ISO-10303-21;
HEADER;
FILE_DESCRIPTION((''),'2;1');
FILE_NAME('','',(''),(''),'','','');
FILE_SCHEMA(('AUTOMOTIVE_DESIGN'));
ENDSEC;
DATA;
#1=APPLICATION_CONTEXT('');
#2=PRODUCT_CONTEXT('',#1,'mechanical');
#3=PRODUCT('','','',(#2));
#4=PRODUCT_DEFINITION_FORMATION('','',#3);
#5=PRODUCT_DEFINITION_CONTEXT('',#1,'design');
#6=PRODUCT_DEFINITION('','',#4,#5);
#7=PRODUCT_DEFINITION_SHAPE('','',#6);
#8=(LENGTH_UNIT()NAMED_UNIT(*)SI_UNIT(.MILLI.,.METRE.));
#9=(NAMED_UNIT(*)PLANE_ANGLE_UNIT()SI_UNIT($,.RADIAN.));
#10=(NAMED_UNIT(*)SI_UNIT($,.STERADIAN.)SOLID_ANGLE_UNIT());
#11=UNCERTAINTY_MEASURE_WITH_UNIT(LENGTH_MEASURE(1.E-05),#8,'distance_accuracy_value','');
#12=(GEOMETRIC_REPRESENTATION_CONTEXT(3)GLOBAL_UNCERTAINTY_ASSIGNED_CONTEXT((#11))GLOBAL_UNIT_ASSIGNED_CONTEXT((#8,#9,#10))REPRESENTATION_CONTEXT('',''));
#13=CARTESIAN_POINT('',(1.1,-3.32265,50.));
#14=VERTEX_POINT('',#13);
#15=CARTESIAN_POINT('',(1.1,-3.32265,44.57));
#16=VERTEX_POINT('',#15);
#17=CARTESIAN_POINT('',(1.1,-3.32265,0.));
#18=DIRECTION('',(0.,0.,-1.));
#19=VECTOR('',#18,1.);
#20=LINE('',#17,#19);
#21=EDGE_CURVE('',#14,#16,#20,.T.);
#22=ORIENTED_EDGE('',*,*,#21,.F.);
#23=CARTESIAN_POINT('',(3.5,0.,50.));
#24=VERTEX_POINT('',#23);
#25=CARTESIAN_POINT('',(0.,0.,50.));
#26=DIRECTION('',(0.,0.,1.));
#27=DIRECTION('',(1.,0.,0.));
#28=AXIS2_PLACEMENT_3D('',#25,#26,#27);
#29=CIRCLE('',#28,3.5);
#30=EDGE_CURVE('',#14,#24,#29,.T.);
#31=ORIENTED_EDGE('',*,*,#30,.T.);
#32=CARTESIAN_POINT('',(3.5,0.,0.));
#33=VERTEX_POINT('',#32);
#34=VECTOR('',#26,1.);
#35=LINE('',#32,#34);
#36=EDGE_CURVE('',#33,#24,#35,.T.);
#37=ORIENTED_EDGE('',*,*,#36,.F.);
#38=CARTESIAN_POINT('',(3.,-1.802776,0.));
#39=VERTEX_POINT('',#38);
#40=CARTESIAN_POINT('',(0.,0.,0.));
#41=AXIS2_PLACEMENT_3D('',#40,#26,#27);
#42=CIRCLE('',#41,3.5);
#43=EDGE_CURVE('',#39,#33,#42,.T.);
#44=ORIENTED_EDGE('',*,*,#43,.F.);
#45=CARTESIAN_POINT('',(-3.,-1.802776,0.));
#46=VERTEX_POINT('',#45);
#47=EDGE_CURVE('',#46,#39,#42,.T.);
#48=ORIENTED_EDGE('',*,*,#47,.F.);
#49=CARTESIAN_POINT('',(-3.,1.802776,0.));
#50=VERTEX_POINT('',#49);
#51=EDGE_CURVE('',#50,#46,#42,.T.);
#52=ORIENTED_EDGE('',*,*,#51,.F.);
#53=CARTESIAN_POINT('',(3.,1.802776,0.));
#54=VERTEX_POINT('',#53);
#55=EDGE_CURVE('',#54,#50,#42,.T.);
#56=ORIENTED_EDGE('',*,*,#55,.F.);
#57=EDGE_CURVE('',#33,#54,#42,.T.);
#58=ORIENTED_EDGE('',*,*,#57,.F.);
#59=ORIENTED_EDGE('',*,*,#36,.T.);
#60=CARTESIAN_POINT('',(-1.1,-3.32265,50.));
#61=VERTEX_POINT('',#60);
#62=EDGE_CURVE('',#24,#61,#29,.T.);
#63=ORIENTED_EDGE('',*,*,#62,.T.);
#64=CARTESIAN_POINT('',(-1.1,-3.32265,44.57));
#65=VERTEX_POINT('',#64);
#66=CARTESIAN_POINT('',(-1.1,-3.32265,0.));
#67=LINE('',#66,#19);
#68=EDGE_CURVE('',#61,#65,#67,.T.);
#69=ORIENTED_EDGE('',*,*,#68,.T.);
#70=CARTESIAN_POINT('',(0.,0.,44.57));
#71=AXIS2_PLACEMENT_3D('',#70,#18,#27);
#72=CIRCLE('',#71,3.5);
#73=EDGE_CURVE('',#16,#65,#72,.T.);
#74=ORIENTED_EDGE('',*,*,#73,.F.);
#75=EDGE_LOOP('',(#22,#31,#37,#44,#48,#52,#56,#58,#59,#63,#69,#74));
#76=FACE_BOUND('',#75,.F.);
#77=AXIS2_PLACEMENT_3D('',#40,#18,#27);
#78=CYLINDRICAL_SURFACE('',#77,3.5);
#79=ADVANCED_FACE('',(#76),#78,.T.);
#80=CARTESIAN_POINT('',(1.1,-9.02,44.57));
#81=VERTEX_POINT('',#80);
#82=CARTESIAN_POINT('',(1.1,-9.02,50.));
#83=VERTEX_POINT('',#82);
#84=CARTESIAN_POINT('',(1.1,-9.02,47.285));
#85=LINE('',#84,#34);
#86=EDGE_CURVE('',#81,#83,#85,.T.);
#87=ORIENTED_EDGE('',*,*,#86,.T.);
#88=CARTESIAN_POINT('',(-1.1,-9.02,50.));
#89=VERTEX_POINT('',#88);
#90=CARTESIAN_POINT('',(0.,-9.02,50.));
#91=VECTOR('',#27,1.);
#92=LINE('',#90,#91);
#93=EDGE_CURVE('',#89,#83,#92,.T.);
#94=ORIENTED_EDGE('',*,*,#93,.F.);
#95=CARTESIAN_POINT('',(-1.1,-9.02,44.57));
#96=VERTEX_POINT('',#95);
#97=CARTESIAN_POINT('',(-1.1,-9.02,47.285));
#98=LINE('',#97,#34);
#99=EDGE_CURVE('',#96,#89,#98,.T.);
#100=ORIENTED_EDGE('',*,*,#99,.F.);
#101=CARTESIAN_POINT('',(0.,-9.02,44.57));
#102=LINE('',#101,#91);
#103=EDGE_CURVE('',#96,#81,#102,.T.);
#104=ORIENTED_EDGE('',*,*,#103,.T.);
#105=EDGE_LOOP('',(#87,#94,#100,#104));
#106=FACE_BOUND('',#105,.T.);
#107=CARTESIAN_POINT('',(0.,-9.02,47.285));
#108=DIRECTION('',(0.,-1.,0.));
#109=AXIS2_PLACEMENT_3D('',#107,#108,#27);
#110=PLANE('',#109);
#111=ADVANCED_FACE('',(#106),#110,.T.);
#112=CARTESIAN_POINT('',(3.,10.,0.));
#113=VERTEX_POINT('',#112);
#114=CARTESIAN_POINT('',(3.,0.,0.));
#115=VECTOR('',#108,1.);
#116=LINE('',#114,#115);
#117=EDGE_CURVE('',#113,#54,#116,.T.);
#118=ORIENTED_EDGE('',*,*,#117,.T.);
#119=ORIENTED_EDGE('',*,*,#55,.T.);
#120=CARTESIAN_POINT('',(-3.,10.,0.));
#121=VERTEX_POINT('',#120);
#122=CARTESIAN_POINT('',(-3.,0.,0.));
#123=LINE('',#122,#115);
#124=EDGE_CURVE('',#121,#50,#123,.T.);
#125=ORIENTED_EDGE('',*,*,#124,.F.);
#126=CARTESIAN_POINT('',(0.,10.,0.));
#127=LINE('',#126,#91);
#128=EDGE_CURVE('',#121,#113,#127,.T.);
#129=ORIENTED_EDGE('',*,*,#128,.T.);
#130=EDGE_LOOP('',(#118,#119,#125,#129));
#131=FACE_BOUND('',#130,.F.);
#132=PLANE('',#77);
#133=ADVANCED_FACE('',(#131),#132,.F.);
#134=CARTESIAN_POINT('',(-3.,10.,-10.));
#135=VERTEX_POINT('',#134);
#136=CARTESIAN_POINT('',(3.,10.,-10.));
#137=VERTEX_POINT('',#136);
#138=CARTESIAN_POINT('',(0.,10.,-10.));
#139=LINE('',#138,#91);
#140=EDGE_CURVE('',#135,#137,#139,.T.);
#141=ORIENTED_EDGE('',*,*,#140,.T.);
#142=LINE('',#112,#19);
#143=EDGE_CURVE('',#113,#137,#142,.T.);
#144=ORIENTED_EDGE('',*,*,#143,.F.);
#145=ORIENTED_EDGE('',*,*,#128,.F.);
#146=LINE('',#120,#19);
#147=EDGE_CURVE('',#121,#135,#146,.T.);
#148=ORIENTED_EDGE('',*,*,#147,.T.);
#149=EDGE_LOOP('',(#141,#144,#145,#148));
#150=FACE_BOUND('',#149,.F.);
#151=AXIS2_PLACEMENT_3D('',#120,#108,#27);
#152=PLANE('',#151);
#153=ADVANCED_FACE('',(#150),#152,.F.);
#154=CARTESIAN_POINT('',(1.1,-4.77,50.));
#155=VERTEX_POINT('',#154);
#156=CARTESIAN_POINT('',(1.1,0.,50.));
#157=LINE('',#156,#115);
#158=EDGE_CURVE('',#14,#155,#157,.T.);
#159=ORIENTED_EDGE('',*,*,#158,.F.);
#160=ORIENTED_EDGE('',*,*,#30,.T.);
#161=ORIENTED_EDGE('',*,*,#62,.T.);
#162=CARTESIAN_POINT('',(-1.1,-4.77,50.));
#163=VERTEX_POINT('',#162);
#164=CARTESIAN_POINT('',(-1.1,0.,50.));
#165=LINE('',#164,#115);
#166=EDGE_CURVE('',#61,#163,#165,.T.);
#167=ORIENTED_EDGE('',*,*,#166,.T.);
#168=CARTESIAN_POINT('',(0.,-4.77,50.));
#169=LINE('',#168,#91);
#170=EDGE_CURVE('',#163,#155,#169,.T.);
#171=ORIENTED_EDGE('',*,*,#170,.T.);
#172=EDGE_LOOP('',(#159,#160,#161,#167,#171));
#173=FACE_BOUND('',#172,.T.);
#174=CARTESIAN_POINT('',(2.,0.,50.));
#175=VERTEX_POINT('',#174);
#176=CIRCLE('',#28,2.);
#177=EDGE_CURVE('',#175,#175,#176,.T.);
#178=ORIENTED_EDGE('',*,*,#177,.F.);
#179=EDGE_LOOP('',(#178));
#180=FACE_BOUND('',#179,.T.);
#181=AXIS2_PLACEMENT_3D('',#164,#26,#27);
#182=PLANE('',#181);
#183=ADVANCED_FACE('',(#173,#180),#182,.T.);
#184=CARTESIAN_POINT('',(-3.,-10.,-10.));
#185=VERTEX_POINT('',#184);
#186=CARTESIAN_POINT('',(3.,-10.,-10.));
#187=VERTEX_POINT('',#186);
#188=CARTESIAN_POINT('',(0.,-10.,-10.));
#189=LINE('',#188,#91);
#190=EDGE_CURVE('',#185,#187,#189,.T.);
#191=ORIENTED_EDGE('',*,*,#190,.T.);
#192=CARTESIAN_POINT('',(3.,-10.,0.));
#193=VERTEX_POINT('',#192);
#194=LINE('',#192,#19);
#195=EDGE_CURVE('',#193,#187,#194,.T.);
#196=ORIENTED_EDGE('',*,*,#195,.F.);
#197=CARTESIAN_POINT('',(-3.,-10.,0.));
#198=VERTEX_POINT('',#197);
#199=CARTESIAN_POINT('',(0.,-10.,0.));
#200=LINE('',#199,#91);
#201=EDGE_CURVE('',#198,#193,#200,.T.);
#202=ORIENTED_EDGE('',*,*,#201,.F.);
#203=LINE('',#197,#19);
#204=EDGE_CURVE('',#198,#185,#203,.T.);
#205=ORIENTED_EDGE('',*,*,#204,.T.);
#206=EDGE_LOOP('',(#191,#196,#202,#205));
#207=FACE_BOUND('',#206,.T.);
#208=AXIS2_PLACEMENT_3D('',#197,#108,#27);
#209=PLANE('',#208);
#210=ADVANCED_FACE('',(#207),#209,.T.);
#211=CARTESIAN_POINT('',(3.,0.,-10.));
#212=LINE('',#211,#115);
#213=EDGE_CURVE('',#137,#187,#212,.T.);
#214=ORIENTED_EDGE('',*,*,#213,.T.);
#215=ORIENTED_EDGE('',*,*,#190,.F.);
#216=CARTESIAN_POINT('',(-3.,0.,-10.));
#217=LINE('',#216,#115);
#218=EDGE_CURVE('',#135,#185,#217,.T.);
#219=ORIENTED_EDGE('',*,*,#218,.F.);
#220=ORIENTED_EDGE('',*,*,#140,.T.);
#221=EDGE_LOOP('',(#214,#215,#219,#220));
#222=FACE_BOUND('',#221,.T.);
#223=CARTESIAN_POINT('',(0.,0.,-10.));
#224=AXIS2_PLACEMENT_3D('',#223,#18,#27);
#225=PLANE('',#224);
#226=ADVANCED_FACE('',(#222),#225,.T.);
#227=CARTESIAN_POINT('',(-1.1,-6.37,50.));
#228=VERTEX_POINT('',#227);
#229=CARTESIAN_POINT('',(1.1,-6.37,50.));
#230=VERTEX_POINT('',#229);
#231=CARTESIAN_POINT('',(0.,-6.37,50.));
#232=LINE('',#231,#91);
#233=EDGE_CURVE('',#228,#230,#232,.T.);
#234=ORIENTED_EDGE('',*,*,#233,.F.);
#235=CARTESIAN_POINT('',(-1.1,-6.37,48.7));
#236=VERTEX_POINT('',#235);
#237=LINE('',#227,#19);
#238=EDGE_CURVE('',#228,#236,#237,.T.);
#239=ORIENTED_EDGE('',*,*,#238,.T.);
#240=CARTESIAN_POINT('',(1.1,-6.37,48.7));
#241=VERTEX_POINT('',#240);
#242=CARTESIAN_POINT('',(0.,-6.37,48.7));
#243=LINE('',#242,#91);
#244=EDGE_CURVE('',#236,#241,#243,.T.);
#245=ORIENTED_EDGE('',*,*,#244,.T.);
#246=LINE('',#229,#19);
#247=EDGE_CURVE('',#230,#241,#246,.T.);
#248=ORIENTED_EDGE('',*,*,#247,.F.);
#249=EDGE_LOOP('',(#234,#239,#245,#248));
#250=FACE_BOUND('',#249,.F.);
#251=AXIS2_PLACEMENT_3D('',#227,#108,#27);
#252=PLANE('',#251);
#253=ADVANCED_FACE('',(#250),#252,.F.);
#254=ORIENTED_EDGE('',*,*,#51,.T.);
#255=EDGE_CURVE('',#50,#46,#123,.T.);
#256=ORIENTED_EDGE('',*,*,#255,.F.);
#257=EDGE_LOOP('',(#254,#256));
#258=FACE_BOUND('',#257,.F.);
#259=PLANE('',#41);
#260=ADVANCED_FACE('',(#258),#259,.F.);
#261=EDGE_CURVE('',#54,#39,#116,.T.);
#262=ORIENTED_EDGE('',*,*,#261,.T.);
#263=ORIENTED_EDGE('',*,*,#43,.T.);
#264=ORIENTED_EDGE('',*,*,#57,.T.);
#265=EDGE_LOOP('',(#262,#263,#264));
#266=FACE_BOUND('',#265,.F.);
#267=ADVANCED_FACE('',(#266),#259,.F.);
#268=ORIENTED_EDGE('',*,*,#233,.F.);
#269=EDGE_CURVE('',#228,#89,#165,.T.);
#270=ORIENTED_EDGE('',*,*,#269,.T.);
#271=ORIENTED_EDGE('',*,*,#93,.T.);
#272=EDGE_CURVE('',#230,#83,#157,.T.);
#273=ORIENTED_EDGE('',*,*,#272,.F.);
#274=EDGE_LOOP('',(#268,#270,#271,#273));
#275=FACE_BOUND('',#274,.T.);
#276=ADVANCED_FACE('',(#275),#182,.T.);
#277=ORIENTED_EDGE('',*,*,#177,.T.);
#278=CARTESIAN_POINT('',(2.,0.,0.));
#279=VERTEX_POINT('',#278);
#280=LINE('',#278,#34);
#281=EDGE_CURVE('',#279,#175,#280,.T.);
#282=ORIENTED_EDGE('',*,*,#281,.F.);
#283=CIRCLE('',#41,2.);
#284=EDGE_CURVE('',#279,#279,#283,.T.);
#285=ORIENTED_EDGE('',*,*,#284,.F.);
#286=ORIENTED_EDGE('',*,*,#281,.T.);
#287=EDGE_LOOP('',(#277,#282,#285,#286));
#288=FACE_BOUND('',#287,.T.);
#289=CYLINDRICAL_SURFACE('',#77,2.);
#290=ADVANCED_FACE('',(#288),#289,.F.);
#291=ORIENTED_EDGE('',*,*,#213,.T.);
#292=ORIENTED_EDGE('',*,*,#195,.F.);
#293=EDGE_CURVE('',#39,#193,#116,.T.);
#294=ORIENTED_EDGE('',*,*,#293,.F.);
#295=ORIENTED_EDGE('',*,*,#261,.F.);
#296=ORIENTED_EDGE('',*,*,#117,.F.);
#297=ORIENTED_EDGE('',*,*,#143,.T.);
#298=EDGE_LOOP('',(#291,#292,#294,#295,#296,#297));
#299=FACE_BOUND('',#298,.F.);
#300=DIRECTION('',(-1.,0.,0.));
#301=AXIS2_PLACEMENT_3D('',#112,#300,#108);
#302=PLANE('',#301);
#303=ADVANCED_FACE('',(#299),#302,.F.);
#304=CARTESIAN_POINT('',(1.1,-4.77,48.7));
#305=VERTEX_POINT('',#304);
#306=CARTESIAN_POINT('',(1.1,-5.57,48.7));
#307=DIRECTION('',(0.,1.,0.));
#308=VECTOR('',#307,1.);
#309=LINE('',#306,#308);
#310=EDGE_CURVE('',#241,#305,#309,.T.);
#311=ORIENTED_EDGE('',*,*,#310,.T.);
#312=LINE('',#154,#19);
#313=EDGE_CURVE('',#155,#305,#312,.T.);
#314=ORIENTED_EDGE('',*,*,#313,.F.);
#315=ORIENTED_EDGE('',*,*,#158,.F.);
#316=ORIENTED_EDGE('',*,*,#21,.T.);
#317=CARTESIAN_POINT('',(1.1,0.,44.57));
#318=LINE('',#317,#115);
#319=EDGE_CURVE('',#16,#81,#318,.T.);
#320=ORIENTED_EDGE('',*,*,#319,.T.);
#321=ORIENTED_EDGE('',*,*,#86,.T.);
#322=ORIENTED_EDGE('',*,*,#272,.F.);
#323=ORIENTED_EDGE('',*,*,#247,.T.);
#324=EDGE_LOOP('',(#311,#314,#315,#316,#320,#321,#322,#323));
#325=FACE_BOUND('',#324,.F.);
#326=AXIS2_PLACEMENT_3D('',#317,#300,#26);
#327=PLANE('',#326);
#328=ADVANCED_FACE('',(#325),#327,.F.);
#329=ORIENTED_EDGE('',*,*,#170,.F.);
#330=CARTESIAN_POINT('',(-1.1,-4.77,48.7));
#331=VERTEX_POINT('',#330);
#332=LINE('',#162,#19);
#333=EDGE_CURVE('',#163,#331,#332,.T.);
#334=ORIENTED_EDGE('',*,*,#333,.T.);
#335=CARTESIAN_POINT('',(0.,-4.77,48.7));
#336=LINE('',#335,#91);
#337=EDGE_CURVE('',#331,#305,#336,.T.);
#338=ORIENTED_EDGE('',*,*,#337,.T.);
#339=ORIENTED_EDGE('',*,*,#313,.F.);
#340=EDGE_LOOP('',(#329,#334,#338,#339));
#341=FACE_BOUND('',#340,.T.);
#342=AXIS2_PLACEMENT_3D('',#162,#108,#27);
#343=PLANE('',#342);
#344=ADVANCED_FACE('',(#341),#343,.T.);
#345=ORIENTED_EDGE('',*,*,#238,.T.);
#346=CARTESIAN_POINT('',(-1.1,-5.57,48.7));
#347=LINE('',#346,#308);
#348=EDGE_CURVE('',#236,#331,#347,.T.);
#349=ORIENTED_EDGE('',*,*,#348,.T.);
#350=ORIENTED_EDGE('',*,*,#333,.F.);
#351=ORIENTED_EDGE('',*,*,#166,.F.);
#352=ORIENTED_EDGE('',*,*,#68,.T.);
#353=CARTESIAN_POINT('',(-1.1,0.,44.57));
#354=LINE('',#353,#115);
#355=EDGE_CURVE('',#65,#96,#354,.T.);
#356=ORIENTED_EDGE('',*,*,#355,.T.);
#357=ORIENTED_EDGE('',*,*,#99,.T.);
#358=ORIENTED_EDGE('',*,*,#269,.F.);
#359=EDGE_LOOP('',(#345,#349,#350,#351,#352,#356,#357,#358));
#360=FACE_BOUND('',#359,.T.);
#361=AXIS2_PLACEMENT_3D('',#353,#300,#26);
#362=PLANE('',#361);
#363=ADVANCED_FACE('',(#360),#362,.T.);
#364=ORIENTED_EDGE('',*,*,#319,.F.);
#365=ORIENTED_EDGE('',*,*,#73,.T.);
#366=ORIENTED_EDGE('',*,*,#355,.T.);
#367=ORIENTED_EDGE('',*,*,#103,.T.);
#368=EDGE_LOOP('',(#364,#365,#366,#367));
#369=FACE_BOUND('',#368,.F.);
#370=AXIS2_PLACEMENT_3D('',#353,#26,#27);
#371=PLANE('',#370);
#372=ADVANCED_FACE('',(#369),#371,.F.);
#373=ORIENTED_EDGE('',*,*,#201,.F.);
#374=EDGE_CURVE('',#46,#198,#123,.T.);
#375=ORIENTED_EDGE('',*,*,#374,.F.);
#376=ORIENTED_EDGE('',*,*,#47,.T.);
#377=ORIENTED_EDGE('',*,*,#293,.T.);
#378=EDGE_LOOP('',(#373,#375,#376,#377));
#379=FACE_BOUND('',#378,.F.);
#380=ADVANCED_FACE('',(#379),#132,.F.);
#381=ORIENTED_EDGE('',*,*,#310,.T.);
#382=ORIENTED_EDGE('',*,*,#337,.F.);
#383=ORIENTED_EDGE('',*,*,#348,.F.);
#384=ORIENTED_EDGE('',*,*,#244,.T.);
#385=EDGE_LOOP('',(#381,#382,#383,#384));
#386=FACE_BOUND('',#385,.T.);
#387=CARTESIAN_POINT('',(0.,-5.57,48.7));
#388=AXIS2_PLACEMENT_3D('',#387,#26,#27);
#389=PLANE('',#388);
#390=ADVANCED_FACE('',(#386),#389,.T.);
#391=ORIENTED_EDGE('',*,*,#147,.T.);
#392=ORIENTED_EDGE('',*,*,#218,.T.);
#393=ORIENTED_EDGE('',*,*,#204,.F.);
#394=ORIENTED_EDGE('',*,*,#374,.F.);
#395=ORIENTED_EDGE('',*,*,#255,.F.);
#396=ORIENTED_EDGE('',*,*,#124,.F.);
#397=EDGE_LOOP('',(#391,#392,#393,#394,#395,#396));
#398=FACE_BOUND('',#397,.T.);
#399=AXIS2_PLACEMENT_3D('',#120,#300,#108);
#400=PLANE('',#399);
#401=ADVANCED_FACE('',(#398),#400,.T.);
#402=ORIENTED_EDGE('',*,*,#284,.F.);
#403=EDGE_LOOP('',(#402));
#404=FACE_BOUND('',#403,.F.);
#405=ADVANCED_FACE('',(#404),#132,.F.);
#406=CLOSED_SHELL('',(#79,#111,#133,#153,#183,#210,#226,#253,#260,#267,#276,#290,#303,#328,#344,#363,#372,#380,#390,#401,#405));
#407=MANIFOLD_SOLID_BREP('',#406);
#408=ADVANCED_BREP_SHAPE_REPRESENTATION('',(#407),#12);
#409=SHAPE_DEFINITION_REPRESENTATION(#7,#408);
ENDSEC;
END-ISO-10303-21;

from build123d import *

# Parameters (mm, degrees)
F0_R          = 3.5
F0_R_2        = 2
F1_DEPTH      = 50
F2_W          = 2.2
F2_H          = 5.43
F3_DEPTH      = 9.02
F4_END_RADIUS = 2
F4_REACH      = 14.8797455995
F5_W          = 2.2
F5_H          = 1.6
F6_DEPTH      = 1.3
F7_W          = 6
F7_H          = 20
F8_DEPTH      = 10


with BuildPart() as f1:
    # F0 (on Top) → F1 (new body)
    with BuildSketch(Plane.XY):
        Circle(F0_R)
        Circle(F0_R_2, mode=Mode.SUBTRACT)
    extrude(amount=F1_DEPTH)

    # F2 (on Front) → F3 (join)
    with BuildSketch(Plane.XZ):
        with Locations((0, 47.285)):
            Rectangle(F2_W, F2_H)
    extrude(amount=F3_DEPTH)

    f4_end = (Plane(origin=(0, 0, 25), x_dir=(-1, 0, 0), z_dir=(0, 0, -1)) * Cylinder(F4_END_RADIUS, 133.7931472917, mode=Mode.PRIVATE)).faces().sort_by_distance((-2, 0, 25))[0]
    # F2 (on Front) → F4 (cut, up to the whole of a round face its end follows)
    with BuildSketch(Plane.XZ):
        with Locations((0, 47.285)):
            Rectangle(F2_W, F2_H)
    f4_long = extrude(amount=F4_REACH, mode=Mode.PRIVATE)
    add(split(f4_long, bisect_by=f4_end, keep=Keep.BOTTOM, mode=Mode.PRIVATE), mode=Mode.SUBTRACT)

    # F5 (on face) → F6 (cut)
    with BuildSketch(Plane.XY.offset(50)):
        with Locations((0, -5.57)):
            Rectangle(F5_W, F5_H)
    extrude(amount=-F6_DEPTH, mode=Mode.SUBTRACT)

    # F7 (on face) → F8 (join)
    with BuildSketch(Plane(origin=(0, 0, 0), x_dir=(1, 0, 0), z_dir=(0, 0, -1))):
        Rectangle(F7_W, F7_H)
    extrude(amount=F8_DEPTH)


solid = f1.part
